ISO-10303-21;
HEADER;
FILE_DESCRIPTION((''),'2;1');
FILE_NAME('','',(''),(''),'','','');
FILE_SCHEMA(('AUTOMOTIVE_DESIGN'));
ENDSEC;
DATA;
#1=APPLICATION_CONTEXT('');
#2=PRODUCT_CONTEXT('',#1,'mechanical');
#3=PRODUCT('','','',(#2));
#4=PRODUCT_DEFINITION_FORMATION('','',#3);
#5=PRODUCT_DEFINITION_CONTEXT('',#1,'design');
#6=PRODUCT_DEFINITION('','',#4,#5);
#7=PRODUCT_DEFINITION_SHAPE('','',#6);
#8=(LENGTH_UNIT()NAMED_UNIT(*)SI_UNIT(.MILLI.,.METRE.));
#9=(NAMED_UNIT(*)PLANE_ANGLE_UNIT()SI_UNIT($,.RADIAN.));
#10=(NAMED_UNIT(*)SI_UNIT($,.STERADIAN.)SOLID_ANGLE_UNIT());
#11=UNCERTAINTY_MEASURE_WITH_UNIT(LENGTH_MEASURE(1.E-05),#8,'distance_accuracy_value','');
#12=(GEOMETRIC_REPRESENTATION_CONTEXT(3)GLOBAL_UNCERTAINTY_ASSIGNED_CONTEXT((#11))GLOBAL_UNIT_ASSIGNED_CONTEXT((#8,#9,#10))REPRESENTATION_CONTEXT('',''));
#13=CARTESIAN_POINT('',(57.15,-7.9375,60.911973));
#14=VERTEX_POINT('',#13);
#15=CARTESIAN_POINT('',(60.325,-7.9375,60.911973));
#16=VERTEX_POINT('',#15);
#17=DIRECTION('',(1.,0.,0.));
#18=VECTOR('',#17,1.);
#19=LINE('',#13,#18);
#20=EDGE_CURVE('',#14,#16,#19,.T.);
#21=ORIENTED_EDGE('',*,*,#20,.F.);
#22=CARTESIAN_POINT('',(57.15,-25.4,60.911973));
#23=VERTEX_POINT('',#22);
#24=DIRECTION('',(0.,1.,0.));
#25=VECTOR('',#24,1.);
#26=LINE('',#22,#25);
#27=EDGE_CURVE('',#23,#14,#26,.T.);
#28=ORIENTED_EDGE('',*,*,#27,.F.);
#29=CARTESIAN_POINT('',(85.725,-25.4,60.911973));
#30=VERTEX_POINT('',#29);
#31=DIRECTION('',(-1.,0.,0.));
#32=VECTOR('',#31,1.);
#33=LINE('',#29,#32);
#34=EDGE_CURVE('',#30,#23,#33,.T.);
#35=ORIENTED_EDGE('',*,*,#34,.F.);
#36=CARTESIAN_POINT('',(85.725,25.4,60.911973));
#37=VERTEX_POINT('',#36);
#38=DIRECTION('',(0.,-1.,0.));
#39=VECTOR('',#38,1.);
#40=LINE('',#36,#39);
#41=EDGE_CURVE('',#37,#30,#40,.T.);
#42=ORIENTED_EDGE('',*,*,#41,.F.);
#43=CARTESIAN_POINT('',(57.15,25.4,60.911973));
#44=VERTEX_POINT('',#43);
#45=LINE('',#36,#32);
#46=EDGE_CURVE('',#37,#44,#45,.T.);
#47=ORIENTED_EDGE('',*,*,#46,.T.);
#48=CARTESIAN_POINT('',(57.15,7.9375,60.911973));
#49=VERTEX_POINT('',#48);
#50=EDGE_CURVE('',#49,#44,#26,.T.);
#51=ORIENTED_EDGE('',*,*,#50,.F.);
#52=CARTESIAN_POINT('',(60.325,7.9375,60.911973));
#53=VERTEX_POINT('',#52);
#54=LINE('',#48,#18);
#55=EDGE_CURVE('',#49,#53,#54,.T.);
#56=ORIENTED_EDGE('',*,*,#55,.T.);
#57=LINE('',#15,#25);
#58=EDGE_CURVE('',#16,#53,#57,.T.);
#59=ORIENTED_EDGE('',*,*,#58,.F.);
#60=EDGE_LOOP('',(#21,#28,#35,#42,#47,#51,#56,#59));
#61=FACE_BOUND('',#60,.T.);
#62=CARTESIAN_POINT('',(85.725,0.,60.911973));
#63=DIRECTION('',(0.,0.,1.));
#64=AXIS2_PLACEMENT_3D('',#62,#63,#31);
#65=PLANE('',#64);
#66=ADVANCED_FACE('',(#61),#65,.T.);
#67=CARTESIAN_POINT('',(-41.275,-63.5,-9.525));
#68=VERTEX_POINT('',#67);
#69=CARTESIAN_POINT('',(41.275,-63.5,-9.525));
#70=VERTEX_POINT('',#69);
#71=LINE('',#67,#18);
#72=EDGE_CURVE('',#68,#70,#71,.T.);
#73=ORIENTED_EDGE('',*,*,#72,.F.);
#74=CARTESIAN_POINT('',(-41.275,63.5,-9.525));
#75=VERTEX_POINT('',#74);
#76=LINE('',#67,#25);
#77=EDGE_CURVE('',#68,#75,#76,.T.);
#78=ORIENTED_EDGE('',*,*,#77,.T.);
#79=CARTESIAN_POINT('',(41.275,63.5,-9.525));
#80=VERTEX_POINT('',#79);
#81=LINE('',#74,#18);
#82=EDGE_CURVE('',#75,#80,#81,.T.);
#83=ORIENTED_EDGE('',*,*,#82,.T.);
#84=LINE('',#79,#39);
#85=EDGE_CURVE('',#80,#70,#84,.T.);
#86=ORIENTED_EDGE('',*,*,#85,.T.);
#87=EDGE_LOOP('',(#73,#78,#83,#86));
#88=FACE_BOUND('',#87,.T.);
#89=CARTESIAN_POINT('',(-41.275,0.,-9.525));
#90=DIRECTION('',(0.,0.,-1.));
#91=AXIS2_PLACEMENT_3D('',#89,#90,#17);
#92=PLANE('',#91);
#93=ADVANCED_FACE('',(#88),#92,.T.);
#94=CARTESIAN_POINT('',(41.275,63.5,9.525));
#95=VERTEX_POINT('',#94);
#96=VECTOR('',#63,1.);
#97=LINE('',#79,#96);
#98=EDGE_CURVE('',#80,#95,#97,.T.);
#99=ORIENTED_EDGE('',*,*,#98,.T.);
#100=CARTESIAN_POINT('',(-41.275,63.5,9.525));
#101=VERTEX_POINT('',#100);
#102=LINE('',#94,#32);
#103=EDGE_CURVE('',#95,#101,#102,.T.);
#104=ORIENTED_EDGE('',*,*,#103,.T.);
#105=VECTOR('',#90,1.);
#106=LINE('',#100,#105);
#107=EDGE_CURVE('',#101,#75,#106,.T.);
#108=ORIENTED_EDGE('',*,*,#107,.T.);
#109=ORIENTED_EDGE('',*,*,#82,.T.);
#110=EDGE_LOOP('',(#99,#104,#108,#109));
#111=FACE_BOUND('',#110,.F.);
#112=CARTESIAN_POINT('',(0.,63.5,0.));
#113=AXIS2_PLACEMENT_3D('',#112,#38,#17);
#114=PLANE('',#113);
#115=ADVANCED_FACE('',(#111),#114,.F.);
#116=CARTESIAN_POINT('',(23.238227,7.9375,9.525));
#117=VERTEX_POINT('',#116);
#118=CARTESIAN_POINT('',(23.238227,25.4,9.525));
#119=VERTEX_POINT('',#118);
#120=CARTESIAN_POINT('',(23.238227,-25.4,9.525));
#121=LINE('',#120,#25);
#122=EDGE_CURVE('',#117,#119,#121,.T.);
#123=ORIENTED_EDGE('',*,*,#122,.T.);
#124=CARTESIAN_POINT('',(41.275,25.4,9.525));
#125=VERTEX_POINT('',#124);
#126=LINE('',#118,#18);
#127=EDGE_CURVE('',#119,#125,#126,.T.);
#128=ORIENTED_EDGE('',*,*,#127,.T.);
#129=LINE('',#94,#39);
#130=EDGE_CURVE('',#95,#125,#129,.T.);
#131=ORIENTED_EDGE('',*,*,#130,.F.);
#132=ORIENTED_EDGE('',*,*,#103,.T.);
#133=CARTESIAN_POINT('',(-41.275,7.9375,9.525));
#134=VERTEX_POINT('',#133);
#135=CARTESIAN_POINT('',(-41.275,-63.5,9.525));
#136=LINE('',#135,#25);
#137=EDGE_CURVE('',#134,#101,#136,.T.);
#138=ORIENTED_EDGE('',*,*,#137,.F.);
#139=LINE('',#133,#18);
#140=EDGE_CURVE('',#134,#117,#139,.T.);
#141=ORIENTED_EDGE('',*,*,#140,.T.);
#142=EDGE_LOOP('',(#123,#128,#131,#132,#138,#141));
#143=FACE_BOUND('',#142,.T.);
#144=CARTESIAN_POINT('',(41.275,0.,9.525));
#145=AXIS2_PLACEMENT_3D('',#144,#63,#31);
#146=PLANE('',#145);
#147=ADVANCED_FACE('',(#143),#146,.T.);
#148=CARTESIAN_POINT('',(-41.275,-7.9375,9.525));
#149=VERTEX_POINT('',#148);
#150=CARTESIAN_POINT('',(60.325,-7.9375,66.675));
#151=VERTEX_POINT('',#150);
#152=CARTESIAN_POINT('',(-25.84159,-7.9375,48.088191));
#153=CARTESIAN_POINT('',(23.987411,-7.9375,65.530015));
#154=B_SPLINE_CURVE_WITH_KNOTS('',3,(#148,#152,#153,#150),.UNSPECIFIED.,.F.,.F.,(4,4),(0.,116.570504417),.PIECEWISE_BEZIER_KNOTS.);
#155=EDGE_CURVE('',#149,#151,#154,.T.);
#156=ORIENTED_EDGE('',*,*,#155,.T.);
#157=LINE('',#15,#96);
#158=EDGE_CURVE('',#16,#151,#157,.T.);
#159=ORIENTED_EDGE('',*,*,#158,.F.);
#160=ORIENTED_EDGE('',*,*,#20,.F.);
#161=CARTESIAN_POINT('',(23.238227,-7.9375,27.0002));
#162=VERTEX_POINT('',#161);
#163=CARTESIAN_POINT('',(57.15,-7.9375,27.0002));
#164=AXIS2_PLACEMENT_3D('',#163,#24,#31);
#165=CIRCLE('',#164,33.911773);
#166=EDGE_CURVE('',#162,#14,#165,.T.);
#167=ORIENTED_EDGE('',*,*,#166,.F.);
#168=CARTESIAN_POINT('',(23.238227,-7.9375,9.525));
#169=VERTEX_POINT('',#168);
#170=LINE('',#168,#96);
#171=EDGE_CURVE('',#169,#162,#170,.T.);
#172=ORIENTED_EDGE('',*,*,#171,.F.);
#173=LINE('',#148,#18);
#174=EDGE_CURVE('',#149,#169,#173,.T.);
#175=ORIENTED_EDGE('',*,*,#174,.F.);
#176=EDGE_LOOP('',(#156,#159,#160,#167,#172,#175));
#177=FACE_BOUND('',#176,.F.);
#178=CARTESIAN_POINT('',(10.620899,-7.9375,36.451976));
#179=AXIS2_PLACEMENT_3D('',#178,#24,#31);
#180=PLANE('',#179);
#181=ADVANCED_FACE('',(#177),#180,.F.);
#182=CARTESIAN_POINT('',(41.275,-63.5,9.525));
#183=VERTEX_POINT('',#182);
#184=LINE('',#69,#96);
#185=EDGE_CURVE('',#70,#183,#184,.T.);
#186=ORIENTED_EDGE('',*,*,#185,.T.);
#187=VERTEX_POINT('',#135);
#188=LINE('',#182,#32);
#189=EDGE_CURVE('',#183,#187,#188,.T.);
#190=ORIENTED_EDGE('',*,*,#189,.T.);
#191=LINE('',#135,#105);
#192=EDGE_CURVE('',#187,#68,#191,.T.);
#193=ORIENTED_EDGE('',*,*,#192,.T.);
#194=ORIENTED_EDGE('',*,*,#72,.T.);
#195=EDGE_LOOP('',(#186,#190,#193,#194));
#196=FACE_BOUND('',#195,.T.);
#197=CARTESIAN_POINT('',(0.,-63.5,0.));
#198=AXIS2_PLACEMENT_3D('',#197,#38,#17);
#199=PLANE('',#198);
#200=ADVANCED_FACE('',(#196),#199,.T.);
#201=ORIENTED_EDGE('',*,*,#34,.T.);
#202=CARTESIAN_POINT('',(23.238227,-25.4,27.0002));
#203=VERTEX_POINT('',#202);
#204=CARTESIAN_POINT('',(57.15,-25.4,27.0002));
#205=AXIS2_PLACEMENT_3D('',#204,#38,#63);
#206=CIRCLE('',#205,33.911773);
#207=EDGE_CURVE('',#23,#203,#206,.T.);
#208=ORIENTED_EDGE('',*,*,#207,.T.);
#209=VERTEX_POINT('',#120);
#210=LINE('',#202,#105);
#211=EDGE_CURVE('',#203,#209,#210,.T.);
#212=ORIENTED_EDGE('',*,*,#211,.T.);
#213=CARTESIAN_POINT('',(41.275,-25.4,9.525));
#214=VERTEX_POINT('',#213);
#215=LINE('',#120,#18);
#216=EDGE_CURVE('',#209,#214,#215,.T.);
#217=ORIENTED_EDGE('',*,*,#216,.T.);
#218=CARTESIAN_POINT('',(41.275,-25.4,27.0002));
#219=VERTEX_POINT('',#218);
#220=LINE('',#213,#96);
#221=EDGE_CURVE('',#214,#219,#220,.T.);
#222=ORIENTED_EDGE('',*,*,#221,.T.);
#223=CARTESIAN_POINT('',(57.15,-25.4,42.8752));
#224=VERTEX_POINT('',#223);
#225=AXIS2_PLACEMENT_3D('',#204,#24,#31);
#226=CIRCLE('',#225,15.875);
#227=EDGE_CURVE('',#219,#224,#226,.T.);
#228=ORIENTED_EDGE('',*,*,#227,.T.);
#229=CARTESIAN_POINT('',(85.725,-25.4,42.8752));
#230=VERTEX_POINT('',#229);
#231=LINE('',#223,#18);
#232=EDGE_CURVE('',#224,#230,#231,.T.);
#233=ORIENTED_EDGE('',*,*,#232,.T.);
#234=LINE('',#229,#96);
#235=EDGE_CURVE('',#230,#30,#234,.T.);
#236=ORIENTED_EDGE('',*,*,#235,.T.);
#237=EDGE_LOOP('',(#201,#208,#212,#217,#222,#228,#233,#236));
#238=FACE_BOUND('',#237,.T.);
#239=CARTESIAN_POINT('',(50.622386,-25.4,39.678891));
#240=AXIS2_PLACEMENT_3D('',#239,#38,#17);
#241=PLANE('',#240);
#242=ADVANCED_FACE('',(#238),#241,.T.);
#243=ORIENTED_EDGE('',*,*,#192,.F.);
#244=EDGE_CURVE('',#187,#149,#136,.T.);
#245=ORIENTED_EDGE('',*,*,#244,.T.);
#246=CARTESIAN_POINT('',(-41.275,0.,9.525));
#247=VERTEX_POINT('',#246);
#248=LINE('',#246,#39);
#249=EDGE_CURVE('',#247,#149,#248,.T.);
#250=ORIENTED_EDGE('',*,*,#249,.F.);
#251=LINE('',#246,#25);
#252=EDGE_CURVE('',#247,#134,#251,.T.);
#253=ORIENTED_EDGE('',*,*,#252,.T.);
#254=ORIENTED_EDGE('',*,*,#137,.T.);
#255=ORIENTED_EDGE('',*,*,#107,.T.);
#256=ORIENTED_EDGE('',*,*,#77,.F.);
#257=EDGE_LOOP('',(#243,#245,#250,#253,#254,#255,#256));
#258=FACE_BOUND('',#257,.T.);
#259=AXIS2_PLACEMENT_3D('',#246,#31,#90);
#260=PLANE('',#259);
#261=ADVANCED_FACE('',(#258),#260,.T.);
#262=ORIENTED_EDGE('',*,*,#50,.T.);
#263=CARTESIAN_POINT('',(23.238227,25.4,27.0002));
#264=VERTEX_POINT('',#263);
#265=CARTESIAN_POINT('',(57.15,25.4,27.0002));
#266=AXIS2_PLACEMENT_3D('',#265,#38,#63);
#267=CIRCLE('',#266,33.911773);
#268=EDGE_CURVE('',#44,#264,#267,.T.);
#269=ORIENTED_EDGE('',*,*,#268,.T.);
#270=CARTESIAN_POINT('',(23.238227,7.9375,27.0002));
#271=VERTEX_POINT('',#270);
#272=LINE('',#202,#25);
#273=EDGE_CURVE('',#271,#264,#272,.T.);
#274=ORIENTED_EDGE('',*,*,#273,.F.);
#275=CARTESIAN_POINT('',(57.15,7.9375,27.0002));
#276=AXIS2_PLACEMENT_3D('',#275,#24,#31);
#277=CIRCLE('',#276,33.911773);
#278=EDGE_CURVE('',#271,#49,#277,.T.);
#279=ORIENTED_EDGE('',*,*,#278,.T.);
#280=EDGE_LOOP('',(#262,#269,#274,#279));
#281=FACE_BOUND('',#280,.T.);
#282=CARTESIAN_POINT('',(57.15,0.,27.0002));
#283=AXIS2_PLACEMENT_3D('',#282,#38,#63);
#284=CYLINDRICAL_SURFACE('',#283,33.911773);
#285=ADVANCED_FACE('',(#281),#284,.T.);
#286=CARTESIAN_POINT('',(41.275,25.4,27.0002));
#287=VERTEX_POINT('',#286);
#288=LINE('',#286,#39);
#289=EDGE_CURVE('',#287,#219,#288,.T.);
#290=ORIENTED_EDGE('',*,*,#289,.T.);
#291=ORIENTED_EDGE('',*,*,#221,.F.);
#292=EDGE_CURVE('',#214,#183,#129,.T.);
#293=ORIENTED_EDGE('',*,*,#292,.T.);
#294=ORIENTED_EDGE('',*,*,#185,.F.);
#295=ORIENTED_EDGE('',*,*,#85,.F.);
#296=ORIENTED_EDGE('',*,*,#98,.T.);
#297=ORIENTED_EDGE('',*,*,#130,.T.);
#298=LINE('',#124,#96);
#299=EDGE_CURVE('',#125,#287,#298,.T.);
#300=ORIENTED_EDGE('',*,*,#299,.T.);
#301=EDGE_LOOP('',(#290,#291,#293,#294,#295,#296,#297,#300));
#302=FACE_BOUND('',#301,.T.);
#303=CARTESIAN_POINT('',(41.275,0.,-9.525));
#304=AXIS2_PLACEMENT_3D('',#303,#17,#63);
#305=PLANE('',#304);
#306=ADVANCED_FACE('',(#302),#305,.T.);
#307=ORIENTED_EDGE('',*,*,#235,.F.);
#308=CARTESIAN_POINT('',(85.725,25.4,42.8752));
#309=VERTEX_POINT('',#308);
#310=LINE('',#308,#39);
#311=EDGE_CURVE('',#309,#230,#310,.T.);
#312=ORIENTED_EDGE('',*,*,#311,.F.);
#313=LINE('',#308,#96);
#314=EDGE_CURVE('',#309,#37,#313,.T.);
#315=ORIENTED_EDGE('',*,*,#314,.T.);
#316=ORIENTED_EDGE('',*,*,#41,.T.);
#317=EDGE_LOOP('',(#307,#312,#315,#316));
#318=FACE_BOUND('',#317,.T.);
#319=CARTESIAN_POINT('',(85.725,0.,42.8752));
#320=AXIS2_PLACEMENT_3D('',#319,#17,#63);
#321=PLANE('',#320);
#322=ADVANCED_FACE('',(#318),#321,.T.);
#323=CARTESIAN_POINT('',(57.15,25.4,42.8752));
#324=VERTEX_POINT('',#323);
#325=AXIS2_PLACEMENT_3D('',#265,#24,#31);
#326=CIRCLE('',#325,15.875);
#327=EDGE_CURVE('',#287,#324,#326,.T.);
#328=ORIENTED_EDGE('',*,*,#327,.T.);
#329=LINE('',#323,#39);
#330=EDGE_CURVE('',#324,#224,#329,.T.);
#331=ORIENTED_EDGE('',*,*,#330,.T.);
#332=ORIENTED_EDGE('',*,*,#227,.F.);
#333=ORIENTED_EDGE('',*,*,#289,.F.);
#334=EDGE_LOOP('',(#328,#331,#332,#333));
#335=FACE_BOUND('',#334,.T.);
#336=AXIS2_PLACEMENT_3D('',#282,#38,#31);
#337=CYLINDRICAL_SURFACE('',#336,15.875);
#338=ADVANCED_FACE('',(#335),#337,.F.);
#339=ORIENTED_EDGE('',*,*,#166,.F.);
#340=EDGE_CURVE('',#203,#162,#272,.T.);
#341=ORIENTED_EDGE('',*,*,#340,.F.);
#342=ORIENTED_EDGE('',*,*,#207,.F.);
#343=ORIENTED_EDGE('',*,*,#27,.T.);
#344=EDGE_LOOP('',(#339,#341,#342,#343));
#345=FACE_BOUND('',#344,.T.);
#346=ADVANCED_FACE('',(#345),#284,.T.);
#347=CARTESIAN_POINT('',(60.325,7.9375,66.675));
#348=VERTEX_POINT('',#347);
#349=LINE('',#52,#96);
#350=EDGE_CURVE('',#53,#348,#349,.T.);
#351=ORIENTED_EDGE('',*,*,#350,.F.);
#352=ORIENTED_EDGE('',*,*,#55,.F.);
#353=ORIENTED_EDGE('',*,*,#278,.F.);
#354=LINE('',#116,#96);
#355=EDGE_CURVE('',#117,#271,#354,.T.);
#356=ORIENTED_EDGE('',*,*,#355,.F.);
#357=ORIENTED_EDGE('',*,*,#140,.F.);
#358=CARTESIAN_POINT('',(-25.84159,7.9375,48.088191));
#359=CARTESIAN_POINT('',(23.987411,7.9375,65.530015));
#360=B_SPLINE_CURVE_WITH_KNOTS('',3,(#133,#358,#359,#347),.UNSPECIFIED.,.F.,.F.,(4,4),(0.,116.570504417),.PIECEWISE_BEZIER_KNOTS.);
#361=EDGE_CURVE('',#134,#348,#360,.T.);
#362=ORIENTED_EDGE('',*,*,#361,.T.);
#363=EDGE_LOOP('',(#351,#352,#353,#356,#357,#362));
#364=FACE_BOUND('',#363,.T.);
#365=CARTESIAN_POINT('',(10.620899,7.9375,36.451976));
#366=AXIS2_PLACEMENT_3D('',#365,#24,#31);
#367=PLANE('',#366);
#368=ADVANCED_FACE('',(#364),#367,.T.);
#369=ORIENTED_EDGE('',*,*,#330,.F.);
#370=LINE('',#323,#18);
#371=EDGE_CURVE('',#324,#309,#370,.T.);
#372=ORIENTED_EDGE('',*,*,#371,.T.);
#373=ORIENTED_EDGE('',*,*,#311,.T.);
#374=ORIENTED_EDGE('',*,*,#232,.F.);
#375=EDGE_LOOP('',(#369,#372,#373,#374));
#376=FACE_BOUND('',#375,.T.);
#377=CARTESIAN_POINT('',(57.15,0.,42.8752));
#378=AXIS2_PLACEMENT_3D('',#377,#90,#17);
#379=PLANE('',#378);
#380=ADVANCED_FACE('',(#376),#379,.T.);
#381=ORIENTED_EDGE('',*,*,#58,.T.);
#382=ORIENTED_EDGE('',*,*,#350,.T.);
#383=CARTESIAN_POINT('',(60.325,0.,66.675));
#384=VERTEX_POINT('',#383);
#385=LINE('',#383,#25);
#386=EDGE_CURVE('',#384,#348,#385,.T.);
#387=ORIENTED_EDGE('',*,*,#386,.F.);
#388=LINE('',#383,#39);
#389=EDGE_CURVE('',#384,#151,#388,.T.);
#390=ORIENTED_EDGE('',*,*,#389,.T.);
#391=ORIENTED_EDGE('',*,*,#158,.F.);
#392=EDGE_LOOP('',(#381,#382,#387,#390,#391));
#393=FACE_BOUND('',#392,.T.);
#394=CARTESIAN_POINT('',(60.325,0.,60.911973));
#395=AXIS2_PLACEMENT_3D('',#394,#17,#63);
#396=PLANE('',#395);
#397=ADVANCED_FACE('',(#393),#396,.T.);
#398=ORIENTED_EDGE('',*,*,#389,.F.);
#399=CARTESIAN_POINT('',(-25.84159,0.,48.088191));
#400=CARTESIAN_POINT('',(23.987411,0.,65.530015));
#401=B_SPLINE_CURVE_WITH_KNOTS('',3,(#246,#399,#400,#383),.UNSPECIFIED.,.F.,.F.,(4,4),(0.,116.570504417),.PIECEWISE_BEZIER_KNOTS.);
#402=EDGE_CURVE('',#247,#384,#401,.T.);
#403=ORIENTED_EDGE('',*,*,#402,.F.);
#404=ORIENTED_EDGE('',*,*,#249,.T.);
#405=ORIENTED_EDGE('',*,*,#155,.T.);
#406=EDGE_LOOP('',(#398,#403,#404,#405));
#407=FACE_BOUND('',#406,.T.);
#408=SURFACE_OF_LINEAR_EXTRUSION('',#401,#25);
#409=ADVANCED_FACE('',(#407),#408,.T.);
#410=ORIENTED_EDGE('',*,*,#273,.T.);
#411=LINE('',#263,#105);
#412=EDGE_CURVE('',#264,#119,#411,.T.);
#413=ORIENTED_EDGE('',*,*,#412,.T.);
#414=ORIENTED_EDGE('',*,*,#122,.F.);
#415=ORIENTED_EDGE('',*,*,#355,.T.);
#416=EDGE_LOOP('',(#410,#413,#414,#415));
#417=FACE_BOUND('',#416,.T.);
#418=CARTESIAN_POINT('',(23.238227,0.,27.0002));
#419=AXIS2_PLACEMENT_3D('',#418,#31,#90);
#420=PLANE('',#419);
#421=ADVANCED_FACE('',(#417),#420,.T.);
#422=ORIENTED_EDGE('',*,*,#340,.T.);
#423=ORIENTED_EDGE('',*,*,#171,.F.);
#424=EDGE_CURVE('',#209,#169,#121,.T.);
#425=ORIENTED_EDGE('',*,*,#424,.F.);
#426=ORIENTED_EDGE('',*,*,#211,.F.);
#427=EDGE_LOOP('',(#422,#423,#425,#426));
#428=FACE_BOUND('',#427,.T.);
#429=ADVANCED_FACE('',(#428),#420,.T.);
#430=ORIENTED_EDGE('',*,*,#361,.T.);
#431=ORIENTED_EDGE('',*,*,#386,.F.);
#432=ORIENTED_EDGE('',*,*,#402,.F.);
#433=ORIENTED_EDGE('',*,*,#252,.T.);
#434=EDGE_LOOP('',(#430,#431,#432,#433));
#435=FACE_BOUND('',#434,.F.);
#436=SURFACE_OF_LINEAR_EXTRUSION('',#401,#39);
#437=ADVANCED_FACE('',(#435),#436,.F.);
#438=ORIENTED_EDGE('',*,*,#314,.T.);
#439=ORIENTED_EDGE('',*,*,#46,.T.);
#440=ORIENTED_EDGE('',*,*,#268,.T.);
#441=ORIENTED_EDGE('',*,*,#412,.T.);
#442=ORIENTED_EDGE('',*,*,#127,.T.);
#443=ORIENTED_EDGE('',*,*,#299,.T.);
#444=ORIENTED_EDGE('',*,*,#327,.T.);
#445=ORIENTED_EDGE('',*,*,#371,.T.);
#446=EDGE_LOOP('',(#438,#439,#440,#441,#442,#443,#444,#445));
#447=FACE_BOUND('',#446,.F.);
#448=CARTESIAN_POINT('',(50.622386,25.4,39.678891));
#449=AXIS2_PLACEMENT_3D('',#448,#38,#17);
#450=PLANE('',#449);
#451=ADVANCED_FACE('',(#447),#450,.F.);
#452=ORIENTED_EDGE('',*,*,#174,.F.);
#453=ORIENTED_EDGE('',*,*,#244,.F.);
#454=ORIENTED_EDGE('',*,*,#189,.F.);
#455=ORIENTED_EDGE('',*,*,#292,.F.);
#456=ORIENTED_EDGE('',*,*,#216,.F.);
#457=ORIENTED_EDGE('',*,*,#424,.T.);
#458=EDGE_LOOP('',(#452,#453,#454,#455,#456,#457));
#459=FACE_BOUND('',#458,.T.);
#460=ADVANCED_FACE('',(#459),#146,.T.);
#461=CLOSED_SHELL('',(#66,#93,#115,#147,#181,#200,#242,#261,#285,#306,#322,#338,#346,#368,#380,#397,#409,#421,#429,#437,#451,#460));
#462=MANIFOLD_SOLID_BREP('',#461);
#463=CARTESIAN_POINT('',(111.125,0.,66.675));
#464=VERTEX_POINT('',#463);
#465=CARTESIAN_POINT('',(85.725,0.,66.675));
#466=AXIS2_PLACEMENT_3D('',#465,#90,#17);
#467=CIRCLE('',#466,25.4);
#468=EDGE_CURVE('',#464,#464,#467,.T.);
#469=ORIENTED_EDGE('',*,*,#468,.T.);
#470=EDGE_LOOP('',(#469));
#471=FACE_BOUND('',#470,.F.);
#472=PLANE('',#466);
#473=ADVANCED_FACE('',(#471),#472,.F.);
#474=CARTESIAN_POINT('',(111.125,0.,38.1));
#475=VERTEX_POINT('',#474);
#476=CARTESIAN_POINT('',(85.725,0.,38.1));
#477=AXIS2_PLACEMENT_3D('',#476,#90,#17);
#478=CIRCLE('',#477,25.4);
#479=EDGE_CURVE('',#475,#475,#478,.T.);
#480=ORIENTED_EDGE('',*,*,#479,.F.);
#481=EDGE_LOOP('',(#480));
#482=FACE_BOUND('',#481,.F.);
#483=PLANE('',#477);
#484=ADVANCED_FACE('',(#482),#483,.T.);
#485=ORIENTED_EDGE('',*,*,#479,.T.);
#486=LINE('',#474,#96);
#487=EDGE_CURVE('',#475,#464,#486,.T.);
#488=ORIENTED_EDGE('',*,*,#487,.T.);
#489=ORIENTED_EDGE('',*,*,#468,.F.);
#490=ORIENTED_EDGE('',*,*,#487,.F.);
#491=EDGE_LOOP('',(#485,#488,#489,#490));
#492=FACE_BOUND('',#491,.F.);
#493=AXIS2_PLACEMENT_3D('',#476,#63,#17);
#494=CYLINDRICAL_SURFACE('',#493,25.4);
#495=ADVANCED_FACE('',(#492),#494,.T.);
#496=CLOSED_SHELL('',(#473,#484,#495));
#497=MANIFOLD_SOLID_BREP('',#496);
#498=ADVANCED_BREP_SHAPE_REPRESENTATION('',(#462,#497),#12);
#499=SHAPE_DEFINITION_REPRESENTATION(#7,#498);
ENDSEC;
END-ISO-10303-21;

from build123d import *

# Parameters (mm, degrees)
F1_DEPTH = 63.5
F3_DEPTH = 25.4
F4_DEPTH = 7.9375


# Not quite as in the source:
# - a feature names something its author has since deleted; it is built from what else it names


with BuildPart() as f1:
    # F0 (on Front) → F1 (new body, symmetric)
    with BuildSketch(Plane.XZ):
        Polygon((-41.275, -9.525), (41.275, -9.525), (41.275, 9.525), (23.2382267714, 9.525), (-41.275, 9.525), align=None)
    extrude(amount=F1_DEPTH, both=True)

    # F0 (on Front) → F3 (join, symmetric)
    with BuildSketch(Plane.XZ):
        with BuildLine():
            Line((23.2382267714, 9.525), (41.275, 9.525))
            Line((41.275, 9.525), (41.275, 27.0002))
            ThreePointArc((41.275, 27.0002), (45.9246798487, 38.2255201513), (57.15, 42.8752))
            Line((57.15, 42.8752), (60.325, 42.8752))
            Line((60.325, 42.8752), (85.725, 42.8752))
            Line((85.725, 42.8752), (85.725, 60.9119732286))
            Line((85.725, 60.9119732286), (60.325, 60.9119732286))
            Line((60.325, 60.9119732286), (57.15, 60.9119732286))
            ThreePointArc((57.15, 60.9119732286), (33.170755188, 50.979444812), (23.2382267714, 27.0002))
            Line((23.2382267714, 27.0002), (23.2382267714, 9.525))
        make_face()
    extrude(amount=F3_DEPTH, both=True)

    # F0 (on Front) → F4 (join, symmetric)
    with BuildSketch(Plane.XZ):
        with BuildLine():
            add(Edge.make_bspline(
                [(-41.275, 9.525), (-25.8415896149, 48.0881909513), (23.9874106138, 65.5300151641), (60.325, 66.675)],
                knots=[0, 0, 0, 0, 116.5705044169, 116.5705044169, 116.5705044169, 116.5705044169], degree=3))
            Line((-41.275, 9.525), (23.2382267714, 9.525))
            Line((23.2382267714, 9.525), (23.2382267714, 27.0002))
            ThreePointArc((23.2382267714, 27.0002), (33.170755188, 50.979444812), (57.15, 60.9119732286))
            Line((57.15, 60.9119732286), (60.325, 60.9119732286))
            Line((60.325, 60.9119732286), (60.325, 66.675))
        make_face()
    extrude(amount=F4_DEPTH, both=True)


with BuildPart() as f5:
    # F0 (on Front) → F5 (revolve)
    with BuildSketch(Plane.XZ):
        Polygon((111.125, 66.675), (85.725, 66.675), (85.725, 60.9119732286), (85.725, 42.8752), (85.725, 38.1), (111.125, 38.1), align=None)
    revolve(axis=Axis((85.725, 0, 52.3875), (0, 0, -1)))


solid = Compound([f1.part, f5.part])
